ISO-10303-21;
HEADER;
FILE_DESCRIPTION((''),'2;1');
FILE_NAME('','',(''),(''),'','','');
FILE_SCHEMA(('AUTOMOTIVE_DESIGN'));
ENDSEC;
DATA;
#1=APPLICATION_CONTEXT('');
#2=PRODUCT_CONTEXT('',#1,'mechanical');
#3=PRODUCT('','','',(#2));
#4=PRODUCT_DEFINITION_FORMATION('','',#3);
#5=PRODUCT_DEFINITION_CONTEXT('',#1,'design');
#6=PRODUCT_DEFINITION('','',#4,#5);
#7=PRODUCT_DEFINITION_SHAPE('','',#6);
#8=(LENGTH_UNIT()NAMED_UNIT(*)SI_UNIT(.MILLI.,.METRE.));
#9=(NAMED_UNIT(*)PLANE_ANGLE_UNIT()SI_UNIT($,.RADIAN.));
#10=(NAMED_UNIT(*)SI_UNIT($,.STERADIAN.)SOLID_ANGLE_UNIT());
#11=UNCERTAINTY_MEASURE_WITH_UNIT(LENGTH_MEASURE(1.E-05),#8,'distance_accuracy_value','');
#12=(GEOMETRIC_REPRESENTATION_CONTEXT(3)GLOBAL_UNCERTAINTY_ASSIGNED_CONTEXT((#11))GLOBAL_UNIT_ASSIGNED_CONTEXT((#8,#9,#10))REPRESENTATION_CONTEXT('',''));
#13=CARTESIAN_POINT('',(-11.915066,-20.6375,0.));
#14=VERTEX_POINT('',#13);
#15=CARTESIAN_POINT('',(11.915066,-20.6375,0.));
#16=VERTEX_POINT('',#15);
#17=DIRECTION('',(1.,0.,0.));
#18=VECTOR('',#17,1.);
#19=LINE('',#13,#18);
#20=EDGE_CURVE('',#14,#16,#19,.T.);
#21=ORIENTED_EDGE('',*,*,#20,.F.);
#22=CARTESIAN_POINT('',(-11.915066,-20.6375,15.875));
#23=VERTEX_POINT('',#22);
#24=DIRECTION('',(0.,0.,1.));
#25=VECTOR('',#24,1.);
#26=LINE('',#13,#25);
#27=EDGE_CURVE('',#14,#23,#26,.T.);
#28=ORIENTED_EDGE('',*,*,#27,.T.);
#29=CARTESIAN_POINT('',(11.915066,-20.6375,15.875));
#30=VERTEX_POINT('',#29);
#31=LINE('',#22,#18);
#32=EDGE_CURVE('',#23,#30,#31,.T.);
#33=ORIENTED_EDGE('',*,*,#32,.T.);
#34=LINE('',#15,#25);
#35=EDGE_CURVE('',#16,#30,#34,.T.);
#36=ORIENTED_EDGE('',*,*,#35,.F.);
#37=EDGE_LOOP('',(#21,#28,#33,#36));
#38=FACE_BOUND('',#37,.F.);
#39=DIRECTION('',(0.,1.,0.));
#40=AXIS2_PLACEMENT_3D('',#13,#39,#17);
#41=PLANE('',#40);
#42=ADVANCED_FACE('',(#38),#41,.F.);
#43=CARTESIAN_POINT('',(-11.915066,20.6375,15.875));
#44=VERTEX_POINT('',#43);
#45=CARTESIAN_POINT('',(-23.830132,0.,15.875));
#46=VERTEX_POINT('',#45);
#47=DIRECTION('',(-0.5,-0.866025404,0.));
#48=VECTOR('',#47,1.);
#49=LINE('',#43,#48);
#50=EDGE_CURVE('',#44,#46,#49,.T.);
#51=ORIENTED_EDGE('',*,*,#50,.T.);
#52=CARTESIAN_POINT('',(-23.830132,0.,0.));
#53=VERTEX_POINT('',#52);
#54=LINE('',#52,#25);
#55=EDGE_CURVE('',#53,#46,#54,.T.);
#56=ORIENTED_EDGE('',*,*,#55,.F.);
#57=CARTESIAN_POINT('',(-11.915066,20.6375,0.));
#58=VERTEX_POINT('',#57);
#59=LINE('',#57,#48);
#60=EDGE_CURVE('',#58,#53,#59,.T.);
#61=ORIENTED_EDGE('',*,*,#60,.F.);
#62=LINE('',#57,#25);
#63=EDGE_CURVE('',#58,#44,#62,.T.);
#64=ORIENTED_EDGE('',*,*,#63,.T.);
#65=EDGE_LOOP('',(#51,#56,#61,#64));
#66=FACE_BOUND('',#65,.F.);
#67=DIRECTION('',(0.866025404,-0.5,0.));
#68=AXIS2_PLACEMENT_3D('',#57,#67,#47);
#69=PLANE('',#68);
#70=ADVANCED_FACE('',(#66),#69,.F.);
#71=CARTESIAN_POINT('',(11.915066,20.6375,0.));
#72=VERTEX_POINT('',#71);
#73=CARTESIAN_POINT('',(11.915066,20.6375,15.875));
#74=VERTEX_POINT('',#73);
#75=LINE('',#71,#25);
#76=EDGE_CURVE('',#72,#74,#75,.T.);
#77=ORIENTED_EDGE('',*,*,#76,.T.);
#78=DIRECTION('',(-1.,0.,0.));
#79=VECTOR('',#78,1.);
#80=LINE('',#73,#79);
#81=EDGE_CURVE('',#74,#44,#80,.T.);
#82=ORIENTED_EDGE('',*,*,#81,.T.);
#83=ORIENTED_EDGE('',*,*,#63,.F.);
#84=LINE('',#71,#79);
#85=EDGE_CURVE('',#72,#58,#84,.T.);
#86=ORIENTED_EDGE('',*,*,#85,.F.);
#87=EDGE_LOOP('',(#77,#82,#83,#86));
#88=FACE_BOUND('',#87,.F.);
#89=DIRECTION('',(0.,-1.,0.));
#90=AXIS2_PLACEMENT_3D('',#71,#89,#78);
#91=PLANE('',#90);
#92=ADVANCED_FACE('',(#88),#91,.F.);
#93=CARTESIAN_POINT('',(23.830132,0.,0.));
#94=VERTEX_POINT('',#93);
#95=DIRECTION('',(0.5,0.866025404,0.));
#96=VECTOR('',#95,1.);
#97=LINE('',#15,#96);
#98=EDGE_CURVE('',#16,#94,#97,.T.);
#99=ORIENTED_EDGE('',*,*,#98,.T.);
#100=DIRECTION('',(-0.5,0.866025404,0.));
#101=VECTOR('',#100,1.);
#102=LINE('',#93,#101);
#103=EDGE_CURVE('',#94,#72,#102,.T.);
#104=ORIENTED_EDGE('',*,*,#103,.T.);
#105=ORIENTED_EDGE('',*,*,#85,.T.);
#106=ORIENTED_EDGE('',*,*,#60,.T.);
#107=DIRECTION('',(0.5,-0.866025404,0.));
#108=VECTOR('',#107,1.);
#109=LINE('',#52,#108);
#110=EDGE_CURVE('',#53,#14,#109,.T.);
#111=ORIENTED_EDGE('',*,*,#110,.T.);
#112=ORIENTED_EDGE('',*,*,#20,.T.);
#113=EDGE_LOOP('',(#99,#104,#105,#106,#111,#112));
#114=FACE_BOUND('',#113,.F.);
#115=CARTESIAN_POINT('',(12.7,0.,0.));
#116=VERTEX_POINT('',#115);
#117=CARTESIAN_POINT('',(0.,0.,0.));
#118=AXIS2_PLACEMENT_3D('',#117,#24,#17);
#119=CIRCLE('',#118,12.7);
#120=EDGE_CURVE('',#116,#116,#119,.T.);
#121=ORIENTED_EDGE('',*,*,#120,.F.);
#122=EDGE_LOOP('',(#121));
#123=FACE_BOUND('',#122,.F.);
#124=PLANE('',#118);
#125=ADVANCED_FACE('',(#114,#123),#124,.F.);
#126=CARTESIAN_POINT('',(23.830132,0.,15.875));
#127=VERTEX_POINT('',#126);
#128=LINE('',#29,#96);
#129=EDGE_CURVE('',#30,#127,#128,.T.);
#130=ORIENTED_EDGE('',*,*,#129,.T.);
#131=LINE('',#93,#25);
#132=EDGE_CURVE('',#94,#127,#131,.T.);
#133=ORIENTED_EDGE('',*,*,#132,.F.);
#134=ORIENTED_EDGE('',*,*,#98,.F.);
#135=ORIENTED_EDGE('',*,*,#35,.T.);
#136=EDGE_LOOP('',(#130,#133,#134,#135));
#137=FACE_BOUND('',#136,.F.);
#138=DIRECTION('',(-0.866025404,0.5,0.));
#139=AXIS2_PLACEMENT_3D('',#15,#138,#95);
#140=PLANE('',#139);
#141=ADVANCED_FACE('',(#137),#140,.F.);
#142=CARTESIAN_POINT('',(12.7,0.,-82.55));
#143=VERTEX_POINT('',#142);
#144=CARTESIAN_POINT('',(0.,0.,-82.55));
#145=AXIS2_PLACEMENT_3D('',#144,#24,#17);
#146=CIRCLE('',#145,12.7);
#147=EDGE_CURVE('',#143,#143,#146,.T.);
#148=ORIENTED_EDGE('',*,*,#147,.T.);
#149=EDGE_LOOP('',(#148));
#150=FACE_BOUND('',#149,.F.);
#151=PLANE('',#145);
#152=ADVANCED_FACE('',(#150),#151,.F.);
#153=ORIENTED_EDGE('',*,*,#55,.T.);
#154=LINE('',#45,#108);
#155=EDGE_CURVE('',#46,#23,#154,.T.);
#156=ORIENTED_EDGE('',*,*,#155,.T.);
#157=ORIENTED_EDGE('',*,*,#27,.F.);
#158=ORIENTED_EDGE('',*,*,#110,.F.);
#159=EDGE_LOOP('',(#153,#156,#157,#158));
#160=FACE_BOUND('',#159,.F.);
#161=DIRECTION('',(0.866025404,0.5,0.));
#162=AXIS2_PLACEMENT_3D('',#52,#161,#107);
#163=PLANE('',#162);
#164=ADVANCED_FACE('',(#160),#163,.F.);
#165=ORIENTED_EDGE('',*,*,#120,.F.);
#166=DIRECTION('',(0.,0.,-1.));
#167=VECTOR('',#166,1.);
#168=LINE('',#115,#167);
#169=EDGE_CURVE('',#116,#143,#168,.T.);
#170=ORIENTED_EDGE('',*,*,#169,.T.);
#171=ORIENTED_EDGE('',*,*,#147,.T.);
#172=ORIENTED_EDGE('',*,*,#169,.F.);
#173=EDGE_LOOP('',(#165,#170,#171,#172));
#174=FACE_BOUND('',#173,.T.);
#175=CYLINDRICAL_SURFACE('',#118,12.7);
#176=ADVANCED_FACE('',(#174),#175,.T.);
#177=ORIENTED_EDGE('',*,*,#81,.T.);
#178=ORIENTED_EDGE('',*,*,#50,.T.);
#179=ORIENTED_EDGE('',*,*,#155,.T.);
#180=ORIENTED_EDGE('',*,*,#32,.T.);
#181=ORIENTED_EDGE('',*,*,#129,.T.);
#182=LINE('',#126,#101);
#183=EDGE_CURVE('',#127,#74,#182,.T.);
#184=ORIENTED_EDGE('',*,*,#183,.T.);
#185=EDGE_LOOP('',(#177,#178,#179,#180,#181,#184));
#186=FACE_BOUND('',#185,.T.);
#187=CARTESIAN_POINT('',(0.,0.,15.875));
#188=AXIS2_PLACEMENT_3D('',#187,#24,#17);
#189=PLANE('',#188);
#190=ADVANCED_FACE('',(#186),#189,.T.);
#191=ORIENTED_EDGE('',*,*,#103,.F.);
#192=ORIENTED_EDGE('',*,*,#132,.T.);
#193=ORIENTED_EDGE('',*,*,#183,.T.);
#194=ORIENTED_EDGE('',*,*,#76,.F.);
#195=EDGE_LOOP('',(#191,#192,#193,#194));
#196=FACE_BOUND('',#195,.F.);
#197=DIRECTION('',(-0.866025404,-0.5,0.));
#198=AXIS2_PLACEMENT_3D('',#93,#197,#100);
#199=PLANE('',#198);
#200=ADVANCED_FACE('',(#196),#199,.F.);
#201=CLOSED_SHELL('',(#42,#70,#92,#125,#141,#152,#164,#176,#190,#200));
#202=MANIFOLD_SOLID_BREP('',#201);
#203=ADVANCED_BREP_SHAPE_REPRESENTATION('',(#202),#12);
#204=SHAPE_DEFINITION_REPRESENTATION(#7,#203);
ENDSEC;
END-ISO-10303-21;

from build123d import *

# Parameters (mm, degrees)
F0_R     = 12.7
F1_DEPTH = 82.55
F3_DEPTH = 15.875


# Not quite as in the source:
# - a feature names something its author has since deleted; it is built from what else it names


with BuildPart() as f1:
    # F0 (on Top) → F1 (new body)
    with BuildSketch(Plane.XY):
        Circle(F0_R)
    extrude(amount=-F1_DEPTH)

    # F2 (on face) → F3 (join)
    with BuildSketch(Plane.XY):
        Polygon((11.9150661804, 20.6375), (-11.9150661804, 20.6375), (-23.8301323608, 0), (-11.9150661804, -20.6375), (11.9150661804, -20.6375), (23.8301323608, 0), align=None)
    extrude(amount=F3_DEPTH)


solid = f1.part
